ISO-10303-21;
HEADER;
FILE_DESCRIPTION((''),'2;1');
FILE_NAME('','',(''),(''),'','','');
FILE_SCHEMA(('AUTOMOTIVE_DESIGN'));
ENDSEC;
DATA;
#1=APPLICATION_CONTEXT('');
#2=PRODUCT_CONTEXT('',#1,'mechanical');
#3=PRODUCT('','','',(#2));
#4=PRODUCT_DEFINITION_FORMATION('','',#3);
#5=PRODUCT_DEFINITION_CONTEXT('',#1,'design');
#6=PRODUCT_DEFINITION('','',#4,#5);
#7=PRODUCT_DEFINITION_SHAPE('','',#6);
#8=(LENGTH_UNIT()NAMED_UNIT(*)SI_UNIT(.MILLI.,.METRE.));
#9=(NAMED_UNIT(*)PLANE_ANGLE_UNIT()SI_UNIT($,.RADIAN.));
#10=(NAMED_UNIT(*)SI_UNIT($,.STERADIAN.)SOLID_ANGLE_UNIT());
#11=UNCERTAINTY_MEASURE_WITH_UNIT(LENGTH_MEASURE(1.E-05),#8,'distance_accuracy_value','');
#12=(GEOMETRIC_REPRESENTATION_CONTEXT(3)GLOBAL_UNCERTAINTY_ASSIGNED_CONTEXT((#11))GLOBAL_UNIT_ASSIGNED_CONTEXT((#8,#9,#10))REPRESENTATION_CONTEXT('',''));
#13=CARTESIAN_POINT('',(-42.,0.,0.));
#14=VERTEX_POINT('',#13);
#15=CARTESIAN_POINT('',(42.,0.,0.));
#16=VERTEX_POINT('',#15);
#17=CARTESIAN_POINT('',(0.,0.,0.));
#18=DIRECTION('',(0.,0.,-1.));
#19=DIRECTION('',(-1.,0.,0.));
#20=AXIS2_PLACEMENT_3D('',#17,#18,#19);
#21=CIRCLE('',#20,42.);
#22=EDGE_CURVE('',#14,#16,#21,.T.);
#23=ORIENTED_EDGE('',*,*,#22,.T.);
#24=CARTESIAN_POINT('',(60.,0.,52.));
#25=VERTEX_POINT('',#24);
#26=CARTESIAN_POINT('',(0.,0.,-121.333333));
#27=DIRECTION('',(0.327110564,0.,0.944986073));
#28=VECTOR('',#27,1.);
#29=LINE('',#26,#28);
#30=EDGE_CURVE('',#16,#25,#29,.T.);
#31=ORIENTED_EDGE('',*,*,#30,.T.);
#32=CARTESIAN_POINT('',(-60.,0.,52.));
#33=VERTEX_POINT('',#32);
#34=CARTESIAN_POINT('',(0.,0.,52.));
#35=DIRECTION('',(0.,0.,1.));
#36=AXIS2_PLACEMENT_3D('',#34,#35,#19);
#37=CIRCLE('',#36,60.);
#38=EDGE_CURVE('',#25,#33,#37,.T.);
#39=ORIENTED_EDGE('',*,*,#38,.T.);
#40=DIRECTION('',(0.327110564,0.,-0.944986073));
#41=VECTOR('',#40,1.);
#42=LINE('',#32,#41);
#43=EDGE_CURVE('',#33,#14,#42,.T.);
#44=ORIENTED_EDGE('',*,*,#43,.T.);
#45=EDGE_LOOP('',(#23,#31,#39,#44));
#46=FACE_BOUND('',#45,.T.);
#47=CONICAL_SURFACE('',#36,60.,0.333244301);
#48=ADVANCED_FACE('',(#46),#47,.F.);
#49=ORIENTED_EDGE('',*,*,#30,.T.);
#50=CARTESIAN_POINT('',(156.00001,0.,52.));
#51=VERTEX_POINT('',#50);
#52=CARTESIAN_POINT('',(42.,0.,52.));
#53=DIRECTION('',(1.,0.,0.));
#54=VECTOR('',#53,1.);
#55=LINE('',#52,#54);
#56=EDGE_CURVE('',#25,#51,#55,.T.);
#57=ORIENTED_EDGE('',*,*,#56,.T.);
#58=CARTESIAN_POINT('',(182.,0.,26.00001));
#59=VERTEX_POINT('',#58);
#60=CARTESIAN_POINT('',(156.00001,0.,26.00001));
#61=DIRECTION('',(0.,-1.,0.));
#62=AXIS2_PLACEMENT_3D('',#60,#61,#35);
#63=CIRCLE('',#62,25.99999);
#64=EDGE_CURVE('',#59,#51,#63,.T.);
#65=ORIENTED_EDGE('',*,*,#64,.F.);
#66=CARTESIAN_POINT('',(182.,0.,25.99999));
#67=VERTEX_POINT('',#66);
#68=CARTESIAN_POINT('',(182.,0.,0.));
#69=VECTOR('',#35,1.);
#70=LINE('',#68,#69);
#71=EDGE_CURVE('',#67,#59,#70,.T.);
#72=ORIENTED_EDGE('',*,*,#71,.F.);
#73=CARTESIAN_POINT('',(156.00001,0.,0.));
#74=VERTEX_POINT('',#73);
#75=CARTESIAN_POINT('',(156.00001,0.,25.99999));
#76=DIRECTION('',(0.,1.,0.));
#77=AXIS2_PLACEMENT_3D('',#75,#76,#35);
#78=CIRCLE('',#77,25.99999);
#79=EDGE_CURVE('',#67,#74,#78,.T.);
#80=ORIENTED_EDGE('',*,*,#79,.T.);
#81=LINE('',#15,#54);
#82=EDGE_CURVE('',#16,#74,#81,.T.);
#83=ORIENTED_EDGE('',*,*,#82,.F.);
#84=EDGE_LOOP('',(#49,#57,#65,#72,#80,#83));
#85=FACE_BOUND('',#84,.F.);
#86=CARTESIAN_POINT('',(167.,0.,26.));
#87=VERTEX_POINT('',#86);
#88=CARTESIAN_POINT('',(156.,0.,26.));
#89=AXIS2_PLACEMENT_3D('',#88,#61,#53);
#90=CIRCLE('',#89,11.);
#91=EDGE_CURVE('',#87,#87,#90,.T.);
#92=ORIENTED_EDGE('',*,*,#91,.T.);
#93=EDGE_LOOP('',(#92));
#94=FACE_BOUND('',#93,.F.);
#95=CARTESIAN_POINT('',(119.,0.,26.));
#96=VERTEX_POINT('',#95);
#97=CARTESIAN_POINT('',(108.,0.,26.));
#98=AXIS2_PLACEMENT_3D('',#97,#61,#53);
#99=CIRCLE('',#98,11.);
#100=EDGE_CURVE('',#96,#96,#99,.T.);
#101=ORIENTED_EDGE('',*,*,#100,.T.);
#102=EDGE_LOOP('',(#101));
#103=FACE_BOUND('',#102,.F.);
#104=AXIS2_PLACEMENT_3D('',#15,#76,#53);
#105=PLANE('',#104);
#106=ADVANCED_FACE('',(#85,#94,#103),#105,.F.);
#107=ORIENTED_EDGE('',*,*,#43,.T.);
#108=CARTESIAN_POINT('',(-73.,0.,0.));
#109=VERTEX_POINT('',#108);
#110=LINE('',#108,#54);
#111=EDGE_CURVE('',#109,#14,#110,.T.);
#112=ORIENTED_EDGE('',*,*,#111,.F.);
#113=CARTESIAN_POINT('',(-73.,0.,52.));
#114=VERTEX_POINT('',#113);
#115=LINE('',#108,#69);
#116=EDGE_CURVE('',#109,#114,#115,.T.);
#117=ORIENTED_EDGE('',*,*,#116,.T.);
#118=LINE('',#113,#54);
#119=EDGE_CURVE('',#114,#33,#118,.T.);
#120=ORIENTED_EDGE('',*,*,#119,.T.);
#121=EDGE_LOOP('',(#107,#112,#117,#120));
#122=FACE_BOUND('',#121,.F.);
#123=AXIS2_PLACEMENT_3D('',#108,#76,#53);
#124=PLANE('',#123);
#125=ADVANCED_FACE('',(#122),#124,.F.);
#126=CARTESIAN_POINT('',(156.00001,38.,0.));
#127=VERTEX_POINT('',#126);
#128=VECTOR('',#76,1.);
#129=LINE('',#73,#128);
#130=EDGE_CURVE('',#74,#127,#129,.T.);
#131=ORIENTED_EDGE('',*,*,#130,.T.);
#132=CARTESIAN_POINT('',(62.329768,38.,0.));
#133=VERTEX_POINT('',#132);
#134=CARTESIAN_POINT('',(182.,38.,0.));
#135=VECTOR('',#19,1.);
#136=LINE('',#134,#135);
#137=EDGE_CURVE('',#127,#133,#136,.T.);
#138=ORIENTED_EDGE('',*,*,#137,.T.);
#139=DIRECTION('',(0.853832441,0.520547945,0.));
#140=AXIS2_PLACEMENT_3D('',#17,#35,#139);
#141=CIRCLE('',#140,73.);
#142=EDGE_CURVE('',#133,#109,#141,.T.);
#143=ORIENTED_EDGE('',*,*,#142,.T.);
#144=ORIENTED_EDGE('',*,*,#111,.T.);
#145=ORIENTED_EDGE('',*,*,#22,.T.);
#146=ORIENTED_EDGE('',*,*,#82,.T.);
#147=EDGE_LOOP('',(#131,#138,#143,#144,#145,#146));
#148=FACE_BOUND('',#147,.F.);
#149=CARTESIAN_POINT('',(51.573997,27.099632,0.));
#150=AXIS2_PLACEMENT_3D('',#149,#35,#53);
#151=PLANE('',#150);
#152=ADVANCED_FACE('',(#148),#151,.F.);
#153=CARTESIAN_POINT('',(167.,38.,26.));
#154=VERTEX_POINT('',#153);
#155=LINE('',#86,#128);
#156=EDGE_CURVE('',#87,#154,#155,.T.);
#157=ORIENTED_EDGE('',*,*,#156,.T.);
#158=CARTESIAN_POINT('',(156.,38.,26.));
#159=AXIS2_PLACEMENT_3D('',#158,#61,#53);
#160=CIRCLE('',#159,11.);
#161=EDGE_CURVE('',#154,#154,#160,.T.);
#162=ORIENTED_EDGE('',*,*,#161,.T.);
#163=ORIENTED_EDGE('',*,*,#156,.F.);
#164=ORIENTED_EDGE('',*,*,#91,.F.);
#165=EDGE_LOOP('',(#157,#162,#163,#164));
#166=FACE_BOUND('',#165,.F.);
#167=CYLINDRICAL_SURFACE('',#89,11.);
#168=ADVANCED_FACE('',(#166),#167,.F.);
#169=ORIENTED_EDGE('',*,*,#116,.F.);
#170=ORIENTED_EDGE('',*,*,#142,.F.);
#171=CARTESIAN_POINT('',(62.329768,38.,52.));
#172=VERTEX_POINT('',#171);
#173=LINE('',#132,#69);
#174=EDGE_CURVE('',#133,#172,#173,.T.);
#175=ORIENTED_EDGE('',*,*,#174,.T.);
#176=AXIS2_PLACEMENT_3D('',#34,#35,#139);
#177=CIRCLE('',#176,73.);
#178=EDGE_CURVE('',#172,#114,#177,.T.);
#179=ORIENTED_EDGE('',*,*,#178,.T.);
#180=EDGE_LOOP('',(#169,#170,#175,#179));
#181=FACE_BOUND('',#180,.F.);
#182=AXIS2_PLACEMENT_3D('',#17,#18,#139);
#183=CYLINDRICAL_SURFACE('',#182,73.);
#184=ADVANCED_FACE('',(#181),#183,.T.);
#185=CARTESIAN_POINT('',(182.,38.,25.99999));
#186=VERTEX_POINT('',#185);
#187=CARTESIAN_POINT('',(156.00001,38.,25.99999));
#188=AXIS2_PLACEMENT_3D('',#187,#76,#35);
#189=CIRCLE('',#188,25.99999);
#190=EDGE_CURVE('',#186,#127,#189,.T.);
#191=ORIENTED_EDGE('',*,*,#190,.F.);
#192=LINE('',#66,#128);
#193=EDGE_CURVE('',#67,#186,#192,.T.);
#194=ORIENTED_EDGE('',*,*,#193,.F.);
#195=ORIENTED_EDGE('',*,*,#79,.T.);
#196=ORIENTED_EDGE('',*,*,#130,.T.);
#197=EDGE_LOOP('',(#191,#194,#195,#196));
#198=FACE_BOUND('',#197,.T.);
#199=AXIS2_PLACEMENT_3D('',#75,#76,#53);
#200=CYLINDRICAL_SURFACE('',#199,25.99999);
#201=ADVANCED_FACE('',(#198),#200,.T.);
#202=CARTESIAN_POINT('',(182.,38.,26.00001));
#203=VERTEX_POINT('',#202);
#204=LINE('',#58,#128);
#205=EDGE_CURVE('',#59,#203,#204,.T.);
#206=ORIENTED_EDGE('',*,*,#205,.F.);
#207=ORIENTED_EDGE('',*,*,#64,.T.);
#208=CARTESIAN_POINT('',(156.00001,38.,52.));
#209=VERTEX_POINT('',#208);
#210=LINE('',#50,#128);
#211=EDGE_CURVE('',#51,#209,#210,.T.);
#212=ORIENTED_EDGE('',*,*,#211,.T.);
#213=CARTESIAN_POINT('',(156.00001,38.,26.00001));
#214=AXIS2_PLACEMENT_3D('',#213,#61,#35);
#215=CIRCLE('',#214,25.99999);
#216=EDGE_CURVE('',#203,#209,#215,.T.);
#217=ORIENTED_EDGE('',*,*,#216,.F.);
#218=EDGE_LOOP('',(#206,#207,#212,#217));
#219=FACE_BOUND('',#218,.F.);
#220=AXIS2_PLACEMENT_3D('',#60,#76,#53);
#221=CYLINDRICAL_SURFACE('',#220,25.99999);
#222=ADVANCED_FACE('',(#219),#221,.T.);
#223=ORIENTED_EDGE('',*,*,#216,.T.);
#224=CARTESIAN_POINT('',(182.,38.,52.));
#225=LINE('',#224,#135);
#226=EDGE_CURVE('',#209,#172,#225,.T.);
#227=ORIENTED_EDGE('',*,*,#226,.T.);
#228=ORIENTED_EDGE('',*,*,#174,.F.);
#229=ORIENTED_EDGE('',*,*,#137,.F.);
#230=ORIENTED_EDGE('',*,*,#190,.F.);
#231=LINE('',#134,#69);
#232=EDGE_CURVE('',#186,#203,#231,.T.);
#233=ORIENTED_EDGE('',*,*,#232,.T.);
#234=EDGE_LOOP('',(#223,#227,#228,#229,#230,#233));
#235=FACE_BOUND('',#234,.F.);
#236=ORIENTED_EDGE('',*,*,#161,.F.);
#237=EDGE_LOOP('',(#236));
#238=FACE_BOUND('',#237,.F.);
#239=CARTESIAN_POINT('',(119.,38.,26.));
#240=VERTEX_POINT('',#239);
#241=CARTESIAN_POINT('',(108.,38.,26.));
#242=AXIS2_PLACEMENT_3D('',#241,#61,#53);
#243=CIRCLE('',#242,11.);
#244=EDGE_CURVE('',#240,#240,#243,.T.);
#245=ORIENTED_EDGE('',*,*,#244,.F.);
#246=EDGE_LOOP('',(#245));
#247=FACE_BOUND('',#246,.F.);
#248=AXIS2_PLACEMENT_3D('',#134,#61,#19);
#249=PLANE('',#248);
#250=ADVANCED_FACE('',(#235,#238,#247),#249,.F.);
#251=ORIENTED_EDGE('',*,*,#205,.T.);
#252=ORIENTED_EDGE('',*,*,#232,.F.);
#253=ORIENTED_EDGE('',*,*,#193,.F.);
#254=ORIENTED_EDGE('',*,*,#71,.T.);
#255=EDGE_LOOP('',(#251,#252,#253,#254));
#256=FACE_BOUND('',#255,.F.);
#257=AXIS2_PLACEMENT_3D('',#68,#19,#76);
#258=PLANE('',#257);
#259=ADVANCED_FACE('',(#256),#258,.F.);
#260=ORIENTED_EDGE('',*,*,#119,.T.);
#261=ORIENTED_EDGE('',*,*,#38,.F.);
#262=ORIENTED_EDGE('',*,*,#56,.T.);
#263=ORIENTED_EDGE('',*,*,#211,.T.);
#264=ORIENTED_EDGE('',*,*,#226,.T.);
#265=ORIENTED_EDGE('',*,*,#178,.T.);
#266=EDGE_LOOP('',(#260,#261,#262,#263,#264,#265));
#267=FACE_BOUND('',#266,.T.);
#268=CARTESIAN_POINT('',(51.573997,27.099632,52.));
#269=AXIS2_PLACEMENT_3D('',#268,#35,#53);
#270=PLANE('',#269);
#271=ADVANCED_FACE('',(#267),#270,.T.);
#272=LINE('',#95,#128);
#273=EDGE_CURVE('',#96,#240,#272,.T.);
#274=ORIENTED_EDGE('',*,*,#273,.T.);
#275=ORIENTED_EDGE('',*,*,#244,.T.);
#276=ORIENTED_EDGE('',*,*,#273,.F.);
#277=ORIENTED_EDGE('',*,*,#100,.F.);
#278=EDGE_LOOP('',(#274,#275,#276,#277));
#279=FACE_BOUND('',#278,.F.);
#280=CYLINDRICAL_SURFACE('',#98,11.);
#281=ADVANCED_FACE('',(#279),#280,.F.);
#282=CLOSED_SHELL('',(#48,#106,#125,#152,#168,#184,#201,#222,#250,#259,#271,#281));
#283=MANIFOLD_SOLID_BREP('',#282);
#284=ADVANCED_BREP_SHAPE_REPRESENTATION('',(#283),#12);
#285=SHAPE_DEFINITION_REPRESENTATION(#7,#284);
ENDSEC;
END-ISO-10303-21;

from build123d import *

# Parameters (mm, degrees)
F1_DEPTH = 52
F4_R     = 11
F5_DEPTH = 57
F6_R     = 25.99999


# Not quite as in the source:
# - a fillet or chamfer is up to 0.001 mm smaller than in the source, because OpenCascade refuses the exact size


with BuildPart() as f1:
    # F0 (on Top) → F1 (new body)
    with BuildSketch(Plane.XY):
        with BuildLine():
            Line((182, 38), (62.329768169, 38))
            ThreePointArc((62.329768169, 38), (-19.7348286497, 70.2818364741), (-73, 0))
            Line((-73, 0), (-42, 0))
            ThreePointArc((-42, 0), (0, 42), (42, 0))
            Line((42, 0), (182, 0))
            Line((182, 0), (182, 38))
        make_face()
    extrude(amount=F1_DEPTH)

    # F2 (on Front) → F3 (revolve, cut)
    with BuildSketch(Plane.XZ):
        Polygon((-42, 0), (0, 0), (0, 52), (-60, 52), align=None)
    revolve(axis=Axis((0, 0, 26), (0, 0, 1)), mode=Mode.SUBTRACT)

    # F4 (on face) → F5 (cut)
    with BuildSketch(Plane.XZ):
        with Locations((108, 26)):
            Circle(F4_R)
        with Locations((156, 26)):
            Circle(F4_R)
    extrude(amount=-F5_DEPTH, mode=Mode.SUBTRACT)

    # F6 (radius 26 in the source; OpenCascade refuses exactly that, so slightly less here)
    f6_edges = [f1.edges().sort_by_distance(p)[0] for p in [
        (182, 19, 52),
        (182, 19, 0),
    ]]
    fillet(f6_edges, radius=F6_R)


solid = f1.part
